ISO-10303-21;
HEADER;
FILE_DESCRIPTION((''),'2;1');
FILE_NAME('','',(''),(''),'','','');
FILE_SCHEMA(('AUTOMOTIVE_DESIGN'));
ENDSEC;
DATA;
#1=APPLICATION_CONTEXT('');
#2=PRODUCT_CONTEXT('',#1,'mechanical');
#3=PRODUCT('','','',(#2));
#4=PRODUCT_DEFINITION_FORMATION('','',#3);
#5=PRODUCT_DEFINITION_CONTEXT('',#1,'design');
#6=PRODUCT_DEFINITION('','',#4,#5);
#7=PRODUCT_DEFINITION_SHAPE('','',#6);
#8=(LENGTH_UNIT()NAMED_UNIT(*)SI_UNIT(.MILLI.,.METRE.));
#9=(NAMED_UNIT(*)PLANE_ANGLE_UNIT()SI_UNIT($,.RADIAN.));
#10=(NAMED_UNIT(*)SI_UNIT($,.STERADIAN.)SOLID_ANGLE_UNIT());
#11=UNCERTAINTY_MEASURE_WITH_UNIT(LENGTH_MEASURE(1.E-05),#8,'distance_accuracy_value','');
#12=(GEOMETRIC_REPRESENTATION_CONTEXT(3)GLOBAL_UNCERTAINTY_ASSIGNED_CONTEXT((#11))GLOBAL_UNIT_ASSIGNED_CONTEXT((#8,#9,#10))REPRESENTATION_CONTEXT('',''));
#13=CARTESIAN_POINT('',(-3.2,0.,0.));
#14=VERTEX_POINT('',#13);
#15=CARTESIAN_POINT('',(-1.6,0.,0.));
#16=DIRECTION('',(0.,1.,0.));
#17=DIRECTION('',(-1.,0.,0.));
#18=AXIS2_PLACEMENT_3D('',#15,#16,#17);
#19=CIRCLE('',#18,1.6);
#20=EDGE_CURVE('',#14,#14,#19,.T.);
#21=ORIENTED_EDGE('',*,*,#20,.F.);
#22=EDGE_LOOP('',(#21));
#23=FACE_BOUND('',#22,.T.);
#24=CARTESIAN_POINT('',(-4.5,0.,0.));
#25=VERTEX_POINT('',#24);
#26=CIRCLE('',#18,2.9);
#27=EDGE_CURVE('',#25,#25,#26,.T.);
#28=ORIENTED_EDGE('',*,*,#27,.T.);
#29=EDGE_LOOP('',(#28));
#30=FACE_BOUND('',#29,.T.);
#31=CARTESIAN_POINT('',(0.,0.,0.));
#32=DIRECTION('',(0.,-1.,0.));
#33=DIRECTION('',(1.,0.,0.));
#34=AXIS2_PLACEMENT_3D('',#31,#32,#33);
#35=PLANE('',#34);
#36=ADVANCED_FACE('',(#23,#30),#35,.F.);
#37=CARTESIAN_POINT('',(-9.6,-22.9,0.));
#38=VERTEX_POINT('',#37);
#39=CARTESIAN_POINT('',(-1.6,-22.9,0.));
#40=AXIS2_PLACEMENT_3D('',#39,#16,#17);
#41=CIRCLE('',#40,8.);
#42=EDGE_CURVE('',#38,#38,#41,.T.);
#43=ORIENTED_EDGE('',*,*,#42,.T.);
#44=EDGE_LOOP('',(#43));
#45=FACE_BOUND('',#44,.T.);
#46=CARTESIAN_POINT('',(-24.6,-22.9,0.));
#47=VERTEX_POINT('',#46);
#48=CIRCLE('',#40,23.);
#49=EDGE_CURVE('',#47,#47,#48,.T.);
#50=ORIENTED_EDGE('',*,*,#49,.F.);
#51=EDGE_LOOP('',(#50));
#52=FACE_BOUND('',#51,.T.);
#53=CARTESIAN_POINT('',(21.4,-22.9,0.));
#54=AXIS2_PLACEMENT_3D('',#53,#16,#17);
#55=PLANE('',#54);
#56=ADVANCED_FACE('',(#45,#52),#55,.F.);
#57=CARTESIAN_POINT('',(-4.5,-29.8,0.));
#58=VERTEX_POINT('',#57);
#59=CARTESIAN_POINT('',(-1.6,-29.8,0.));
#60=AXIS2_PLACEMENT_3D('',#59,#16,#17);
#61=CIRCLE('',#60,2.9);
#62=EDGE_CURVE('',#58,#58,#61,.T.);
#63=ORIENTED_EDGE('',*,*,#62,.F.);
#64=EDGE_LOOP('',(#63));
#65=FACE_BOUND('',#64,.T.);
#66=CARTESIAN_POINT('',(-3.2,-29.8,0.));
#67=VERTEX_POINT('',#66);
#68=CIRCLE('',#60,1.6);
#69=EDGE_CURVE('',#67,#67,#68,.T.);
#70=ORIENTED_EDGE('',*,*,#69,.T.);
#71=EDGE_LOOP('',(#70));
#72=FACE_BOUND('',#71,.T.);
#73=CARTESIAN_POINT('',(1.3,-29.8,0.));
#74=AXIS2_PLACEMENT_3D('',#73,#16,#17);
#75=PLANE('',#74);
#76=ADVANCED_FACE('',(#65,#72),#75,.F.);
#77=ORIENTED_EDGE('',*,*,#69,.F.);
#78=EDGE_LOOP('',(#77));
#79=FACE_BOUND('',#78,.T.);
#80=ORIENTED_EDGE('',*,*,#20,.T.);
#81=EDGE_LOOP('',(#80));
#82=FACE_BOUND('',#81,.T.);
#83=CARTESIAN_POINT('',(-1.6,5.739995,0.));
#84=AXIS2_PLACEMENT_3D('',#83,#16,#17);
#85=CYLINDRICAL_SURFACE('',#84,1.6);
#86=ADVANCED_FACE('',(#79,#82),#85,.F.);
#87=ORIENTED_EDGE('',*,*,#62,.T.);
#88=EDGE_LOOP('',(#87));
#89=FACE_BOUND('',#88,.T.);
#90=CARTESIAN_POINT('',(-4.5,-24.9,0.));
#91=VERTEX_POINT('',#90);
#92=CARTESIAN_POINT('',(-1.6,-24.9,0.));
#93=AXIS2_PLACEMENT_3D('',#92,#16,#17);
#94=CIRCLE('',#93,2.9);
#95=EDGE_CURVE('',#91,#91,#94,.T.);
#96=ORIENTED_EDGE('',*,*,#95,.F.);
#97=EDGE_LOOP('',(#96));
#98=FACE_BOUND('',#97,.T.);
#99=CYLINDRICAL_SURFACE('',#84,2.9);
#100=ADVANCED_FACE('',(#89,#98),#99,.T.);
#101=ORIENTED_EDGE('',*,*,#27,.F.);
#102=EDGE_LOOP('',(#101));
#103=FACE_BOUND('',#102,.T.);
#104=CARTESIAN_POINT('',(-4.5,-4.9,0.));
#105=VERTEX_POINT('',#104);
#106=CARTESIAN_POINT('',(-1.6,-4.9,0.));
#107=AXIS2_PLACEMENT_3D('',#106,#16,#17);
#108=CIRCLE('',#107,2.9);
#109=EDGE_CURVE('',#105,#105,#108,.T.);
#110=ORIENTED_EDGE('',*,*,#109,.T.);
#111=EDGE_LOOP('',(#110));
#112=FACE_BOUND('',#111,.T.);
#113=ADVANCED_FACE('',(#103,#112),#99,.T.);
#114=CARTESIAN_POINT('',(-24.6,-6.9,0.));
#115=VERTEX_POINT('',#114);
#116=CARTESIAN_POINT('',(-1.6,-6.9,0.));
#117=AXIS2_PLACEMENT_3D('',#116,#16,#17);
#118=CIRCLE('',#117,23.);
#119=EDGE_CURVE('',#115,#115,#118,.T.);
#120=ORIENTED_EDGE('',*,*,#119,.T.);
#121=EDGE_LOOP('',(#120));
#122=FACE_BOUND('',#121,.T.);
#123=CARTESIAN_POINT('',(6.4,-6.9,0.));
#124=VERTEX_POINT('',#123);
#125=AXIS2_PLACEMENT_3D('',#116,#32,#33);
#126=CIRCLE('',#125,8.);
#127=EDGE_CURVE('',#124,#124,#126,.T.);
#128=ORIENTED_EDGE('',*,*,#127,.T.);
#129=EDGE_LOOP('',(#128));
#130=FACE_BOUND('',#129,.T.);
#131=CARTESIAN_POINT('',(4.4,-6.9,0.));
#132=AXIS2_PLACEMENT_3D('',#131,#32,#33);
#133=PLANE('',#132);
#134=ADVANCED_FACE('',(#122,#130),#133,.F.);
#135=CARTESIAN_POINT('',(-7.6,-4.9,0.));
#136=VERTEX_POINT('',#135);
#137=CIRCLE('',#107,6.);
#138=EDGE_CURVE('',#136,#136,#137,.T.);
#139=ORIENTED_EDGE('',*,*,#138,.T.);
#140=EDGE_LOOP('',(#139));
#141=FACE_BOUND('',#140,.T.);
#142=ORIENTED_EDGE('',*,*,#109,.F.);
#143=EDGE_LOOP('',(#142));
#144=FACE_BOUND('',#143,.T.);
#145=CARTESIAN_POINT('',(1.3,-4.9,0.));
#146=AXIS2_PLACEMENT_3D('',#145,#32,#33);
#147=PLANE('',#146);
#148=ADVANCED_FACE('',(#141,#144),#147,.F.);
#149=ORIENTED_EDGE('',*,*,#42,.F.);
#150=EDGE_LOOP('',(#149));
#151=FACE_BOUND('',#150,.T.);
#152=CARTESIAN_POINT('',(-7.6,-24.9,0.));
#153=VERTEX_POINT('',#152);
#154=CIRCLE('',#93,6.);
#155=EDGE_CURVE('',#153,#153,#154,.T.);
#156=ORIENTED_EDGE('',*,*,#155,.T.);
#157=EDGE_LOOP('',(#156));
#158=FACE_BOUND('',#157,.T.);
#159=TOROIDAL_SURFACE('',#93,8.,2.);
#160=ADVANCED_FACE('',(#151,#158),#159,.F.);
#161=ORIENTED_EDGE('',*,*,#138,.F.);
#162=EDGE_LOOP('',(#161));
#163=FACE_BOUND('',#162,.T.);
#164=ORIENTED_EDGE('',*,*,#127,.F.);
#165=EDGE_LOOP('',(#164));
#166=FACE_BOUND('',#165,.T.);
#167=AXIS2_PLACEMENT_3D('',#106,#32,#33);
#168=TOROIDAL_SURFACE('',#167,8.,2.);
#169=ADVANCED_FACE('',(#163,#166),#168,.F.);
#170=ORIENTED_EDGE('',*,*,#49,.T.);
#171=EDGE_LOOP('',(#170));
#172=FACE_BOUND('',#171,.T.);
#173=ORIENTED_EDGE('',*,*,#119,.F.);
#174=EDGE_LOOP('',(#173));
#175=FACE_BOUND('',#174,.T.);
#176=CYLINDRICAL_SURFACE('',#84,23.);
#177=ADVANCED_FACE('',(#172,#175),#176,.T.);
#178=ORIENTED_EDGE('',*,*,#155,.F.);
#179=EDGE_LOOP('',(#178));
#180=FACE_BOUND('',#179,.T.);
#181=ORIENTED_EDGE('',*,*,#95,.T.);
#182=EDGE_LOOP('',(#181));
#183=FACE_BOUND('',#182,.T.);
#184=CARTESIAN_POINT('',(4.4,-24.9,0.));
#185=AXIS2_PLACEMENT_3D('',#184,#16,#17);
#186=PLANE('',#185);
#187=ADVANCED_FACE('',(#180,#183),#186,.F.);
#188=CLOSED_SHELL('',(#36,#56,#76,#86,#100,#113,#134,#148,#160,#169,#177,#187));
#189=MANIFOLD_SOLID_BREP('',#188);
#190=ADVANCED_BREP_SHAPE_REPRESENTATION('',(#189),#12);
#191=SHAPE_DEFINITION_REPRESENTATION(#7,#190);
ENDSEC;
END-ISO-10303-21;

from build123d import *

# Parameters (mm, degrees)
FILLET_1_R = 2


with BuildPart() as part:
    # 草图1 → 旋转1 (revolve)
    with BuildSketch(Plane.XY, mode=Mode.PRIVATE) as revolve_1_sk:
        Polygon((0, 0), (1.3, 0), (1.3, -4.9), (4.4, -4.9), (4.4, -6.9), (21.4, -6.9), (21.4, -22.9), (4.4, -22.9), (4.4, -24.9), (1.3, -24.9), (1.3, -29.8), (0, -29.8), align=None)
    revolve(revolve_1_sk.sketch.rotate(Axis((-1.6, 5.739994567, 0), (0, -1, 0)), 180), axis=Axis((-1.6, 5.739994567, 0), (0, -1, 0)))

    # 圆角1
    fillet_1_edges = [part.edges().sort_by_distance(p)[0] for p in [
        (4.4, -22.9, 0),
        (4.4, -6.9, 0),
    ]]
    fillet(fillet_1_edges, radius=FILLET_1_R - 0.0001)  # a hair under: the kernel refuses the full size


solid = part.part
